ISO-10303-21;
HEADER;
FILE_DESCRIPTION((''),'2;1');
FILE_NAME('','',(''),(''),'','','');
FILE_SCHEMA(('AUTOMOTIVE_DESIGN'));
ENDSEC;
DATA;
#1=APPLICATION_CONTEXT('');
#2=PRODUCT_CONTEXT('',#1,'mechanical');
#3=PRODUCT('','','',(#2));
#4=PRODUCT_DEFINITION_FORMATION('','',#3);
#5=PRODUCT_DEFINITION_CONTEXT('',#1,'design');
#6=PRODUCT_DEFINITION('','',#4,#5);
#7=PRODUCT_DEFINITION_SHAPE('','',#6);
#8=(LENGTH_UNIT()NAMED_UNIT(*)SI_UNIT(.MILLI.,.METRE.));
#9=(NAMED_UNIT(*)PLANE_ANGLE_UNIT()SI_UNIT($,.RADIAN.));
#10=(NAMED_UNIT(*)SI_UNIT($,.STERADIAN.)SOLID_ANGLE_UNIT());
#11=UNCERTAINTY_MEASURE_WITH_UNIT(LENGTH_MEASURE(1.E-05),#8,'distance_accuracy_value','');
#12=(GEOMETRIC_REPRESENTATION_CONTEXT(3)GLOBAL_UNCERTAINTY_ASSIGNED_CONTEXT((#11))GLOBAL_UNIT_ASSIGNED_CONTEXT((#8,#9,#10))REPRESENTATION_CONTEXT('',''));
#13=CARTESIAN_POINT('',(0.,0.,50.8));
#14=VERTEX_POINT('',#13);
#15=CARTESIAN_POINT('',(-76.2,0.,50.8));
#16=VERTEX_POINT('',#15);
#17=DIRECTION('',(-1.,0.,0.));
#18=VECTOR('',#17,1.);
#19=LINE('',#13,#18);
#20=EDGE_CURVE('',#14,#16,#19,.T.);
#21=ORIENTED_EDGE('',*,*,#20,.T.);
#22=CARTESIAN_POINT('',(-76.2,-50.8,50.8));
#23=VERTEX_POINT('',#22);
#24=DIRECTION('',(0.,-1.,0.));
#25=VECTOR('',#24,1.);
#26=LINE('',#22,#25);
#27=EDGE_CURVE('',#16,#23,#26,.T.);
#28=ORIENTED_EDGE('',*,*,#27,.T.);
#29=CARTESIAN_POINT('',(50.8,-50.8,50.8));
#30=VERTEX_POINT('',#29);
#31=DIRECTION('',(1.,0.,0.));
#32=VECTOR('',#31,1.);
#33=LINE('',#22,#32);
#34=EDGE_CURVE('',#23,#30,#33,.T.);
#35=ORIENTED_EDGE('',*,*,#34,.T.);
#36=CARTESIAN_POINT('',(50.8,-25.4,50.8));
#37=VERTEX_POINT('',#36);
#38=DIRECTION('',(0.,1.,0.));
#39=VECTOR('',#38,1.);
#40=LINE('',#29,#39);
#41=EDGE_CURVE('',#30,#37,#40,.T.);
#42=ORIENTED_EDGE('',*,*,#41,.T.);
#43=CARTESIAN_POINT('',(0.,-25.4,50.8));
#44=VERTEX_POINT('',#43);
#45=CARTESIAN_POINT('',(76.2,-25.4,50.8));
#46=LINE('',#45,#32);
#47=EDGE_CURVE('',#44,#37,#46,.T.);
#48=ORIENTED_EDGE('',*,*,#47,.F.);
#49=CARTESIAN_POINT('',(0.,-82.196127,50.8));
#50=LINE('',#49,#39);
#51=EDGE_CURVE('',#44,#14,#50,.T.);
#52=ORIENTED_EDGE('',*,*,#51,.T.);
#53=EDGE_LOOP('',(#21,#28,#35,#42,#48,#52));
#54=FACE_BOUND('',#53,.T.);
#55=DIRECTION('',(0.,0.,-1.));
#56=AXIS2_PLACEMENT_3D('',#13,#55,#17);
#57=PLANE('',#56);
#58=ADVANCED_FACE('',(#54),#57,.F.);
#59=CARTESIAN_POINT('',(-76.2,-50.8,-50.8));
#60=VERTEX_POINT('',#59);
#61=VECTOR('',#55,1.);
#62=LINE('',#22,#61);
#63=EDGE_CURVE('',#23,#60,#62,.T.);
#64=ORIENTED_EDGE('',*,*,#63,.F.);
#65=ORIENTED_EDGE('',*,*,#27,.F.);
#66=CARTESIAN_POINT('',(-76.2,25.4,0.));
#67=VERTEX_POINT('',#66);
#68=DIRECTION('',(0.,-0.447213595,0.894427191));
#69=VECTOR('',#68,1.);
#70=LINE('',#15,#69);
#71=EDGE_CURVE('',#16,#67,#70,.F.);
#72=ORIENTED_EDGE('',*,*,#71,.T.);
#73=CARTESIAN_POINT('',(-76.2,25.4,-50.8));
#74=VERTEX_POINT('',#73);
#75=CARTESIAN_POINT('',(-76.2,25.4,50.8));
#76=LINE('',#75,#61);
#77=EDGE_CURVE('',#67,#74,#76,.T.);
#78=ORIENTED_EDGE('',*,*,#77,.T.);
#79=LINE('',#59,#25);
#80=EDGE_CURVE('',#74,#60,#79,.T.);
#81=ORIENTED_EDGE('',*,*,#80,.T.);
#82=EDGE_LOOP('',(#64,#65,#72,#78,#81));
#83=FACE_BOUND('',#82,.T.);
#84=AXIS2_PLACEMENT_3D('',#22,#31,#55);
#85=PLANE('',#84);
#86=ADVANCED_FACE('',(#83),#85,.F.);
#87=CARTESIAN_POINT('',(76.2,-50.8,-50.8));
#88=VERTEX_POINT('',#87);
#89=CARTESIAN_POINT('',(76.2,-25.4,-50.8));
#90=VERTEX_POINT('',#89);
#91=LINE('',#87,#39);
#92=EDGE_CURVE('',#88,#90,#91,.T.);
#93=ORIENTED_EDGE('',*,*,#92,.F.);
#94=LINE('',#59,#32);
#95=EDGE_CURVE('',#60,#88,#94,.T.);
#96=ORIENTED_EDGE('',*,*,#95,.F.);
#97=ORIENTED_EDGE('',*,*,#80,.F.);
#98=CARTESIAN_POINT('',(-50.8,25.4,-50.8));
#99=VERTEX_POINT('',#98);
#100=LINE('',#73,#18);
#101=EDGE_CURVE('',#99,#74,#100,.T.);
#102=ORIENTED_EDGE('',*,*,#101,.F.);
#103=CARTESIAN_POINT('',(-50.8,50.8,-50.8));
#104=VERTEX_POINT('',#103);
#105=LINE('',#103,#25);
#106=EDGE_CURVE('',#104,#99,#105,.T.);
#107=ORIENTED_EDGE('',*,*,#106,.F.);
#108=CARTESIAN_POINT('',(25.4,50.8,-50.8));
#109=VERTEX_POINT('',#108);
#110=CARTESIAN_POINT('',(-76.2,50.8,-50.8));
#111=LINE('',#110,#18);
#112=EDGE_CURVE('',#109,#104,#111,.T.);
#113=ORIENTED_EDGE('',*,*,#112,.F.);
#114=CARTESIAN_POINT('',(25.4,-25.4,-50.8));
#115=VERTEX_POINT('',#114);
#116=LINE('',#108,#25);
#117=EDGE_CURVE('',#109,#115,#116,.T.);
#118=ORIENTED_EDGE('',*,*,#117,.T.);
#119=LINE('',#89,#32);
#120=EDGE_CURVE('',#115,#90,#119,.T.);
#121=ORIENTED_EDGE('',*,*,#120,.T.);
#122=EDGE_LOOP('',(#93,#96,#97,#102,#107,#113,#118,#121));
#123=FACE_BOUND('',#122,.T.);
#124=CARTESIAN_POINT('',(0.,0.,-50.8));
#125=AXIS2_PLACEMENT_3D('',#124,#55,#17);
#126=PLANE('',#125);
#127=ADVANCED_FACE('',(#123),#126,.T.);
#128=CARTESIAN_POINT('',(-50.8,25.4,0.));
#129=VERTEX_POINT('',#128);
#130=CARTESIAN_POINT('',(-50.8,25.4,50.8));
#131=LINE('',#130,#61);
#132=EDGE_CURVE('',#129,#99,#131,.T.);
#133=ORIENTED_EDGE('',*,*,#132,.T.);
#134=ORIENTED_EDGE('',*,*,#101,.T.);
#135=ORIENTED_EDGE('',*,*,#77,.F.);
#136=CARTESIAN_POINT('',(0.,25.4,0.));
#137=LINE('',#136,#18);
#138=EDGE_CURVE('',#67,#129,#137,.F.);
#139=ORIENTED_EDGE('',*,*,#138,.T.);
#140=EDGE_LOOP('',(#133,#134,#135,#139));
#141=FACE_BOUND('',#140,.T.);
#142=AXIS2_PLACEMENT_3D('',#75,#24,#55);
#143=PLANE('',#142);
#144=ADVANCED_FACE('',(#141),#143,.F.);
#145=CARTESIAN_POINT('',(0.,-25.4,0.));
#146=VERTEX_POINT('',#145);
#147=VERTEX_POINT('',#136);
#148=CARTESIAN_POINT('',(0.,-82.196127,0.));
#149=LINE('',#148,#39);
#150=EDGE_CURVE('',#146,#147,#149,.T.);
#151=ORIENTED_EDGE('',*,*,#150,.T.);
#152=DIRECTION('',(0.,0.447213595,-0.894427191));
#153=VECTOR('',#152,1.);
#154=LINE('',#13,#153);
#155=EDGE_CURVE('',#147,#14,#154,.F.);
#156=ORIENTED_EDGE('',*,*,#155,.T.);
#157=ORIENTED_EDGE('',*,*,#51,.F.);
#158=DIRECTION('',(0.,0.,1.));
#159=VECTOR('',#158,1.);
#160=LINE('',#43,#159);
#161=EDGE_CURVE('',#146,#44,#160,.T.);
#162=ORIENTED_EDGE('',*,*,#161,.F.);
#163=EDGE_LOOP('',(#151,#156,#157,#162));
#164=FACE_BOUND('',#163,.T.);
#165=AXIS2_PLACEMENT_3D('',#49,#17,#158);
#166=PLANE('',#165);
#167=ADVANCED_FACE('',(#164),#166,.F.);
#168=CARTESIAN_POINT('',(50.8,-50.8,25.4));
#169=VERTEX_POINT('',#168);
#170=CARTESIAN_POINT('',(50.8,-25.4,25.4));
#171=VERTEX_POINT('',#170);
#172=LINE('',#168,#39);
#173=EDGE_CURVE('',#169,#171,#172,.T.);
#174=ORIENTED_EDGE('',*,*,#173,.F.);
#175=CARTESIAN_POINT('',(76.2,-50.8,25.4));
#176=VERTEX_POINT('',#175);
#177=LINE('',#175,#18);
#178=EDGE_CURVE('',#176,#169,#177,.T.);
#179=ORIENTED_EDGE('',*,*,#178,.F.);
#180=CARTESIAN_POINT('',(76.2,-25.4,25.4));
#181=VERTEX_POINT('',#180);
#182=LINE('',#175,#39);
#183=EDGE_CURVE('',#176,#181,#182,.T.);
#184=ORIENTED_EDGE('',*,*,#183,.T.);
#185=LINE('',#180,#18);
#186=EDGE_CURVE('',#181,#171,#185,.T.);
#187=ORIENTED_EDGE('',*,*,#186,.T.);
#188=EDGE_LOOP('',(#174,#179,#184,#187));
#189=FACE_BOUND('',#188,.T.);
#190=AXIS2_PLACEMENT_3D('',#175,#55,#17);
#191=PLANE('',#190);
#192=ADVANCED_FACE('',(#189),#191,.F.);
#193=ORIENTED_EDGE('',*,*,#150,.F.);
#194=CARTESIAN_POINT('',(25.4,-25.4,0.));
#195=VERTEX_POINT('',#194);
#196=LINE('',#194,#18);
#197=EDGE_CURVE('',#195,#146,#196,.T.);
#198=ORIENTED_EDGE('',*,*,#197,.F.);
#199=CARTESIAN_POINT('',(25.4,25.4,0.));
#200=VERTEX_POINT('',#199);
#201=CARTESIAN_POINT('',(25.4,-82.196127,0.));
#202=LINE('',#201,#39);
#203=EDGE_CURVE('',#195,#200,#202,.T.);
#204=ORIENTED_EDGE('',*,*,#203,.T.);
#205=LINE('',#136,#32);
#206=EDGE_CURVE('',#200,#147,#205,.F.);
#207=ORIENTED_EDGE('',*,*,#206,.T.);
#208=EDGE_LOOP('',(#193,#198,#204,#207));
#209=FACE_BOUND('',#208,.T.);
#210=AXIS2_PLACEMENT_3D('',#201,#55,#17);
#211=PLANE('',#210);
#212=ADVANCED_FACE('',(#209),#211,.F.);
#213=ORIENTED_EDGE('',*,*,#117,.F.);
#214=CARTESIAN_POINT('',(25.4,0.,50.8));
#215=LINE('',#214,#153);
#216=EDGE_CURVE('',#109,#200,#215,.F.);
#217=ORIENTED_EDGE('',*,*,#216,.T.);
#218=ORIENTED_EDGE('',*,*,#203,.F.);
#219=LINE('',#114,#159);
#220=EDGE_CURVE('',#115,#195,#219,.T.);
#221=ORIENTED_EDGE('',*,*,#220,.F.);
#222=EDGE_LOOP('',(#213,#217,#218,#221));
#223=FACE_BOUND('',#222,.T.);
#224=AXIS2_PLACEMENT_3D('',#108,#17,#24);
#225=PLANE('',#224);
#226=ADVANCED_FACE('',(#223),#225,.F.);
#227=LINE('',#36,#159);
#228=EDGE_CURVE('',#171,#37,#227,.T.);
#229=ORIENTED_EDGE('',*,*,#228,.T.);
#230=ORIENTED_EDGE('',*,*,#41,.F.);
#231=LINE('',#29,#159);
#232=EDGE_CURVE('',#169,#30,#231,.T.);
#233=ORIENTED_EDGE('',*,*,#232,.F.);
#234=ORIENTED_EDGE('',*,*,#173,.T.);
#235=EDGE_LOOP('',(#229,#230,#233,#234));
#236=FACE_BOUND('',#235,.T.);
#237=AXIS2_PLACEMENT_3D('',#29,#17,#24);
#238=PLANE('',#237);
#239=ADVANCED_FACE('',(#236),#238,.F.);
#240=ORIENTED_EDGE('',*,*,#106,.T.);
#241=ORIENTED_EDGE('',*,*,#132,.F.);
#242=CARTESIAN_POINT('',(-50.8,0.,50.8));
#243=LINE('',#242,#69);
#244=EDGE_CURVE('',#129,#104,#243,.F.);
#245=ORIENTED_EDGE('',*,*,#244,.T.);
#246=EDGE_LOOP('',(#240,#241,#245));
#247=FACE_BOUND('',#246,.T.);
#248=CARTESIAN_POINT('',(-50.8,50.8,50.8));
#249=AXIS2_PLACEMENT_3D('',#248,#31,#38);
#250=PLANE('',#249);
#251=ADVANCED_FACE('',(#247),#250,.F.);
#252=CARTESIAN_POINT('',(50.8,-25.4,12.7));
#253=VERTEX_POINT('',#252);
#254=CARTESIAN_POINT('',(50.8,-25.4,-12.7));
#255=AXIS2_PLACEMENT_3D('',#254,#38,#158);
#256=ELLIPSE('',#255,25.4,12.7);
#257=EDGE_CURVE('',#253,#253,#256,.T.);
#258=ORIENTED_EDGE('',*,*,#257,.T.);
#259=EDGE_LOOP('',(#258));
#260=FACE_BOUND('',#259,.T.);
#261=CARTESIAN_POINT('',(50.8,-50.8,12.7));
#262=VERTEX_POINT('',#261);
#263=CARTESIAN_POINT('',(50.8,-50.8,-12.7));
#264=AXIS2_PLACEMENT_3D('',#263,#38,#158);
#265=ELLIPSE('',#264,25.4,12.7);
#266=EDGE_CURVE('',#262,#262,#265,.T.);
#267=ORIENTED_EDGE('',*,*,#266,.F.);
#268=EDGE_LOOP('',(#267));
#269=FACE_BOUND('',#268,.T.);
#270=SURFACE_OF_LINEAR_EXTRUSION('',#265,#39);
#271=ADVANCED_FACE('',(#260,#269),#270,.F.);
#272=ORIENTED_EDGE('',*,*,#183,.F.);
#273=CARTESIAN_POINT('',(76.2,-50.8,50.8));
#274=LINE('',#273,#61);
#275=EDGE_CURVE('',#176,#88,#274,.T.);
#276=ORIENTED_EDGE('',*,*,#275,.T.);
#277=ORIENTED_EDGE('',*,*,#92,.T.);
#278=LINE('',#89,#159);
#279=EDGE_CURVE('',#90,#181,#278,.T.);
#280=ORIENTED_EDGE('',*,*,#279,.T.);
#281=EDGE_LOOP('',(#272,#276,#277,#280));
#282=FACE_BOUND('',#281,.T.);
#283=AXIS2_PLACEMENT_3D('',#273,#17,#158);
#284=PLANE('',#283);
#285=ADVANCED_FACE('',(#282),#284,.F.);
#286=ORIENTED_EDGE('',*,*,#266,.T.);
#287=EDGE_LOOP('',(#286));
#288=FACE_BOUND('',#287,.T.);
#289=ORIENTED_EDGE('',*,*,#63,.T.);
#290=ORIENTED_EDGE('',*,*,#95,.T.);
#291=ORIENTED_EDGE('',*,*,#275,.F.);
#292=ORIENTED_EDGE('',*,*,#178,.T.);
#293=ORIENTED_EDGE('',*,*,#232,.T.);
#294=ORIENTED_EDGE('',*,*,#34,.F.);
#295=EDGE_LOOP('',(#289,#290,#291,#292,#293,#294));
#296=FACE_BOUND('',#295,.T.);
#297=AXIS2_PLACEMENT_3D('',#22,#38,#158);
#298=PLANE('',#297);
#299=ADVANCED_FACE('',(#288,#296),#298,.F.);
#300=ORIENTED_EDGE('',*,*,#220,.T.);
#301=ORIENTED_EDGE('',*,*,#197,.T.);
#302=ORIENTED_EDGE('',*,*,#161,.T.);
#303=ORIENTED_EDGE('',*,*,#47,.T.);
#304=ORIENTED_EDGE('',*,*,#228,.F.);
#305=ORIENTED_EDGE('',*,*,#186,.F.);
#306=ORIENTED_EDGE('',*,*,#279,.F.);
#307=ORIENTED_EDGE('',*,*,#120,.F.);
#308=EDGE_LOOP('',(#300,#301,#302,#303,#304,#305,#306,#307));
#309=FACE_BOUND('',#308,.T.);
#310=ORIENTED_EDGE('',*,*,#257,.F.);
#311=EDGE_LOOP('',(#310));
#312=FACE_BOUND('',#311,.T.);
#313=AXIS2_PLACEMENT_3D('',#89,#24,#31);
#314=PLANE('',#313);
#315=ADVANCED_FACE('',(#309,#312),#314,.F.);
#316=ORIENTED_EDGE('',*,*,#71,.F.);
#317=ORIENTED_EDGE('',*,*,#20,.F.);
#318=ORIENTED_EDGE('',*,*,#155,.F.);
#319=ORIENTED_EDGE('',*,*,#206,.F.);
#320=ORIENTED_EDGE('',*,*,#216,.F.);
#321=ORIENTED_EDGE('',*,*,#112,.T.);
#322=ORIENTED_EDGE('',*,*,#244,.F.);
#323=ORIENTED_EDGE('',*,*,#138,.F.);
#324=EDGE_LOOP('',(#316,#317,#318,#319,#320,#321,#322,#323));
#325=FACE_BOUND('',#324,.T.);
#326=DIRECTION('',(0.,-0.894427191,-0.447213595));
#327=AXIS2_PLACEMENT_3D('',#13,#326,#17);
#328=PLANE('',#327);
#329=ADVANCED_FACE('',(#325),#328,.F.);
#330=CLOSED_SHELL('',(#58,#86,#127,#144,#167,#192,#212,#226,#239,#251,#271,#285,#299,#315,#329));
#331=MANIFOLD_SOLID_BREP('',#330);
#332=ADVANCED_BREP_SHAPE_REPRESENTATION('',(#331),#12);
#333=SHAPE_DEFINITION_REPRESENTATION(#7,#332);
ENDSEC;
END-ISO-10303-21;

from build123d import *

# Parameters (mm, degrees)
SKETCH2_W           = 152.4
SKETCH2_H           = 101.6
BOSS_EXTRUDE1_DEPTH = 50.8
SKETCH3_W           = 50.8
SKETCH3_H           = 76.2
CUT_EXTRUDE1_DEPTH  = 137.783186101
SKETCH4_W           = 25.4
SKETCH4_H           = 25.4
CUT_EXTRUDE2_DEPTH  = 120.1365603
SKETCH5_W           = 25.4
SKETCH5_H           = 50.8
CUT_EXTRUDE3_DEPTH  = 76.2
SKETCH6_W           = 25.4
SKETCH6_H           = 25.4
CUT_EXTRUDE4_DEPTH  = 137.783186101
CHAMFER1_SIZE2      = 101.6
CHAMFER1_SIZE       = 50.8
SKETCH7_RX          = 25.4
SKETCH7_RY          = 12.7
CUT_EXTRUDE5_DEPTH  = 120.1365603


with BuildPart() as part:
    # Sketch2 → Boss-Extrude1 (new, symmetric)
    with BuildSketch(Plane.XY):
        Rectangle(SKETCH2_W, SKETCH2_H)
    extrude(amount=BOSS_EXTRUDE1_DEPTH, both=True)

    # Sketch3 → Cut-Extrude1 (cut, through all)
    with BuildSketch(Plane.XY.offset(50.8)):
        with Locations((50.8, 12.7)):
            Rectangle(SKETCH3_W, SKETCH3_H)
    extrude(amount=-CUT_EXTRUDE1_DEPTH, mode=Mode.SUBTRACT)

    # Sketch4 → Cut-Extrude2 (cut, through all)
    with BuildSketch(Plane(origin=(0, -25.4, 0), x_dir=(1, 0, 0), z_dir=(0, 1, 0))):
        with Locations((63.5, -38.1)):
            Rectangle(SKETCH4_W, SKETCH4_H)
    extrude(amount=-CUT_EXTRUDE2_DEPTH, mode=Mode.SUBTRACT)

    # Sketch5 → Cut-Extrude3 (cut)
    with BuildSketch(Plane(origin=(0, 50.8, 0), x_dir=(1, 0, 0), z_dir=(0, 1, 0))):
        with Locations((12.7, -25.4)):
            Rectangle(SKETCH5_W, SKETCH5_H)
    extrude(amount=-CUT_EXTRUDE3_DEPTH, mode=Mode.SUBTRACT)

    # Sketch6 → Cut-Extrude4 (cut, through all)
    with BuildSketch(Plane(origin=(0, 0, -50.8), x_dir=(-1, 0, 0), z_dir=(0, 0, -1))):
        with Locations((63.5, 38.1)):
            Rectangle(SKETCH6_W, SKETCH6_H)
    extrude(amount=-CUT_EXTRUDE4_DEPTH, mode=Mode.SUBTRACT)

    # Chamfer1
    chamfer1_edges = [part.edges().sort_by_distance(p)[0] for p in [
        (-25.4, 50.8, 50.8),
    ]]
    chamfer1_side = [part.faces().sort_by_distance(p)[0] for p in [
        (-25.4, 49.784, 50.8),
    ]]
    chamfer(chamfer1_edges, length=CHAMFER1_SIZE - 0.0001, length2=CHAMFER1_SIZE2 - 0.0001, reference=chamfer1_side[0])  # a hair under: the kernel refuses the full size

    # Sketch7 → Cut-Extrude5 (cut, through all)
    with BuildSketch(Plane(origin=(0, -25.4, 0), x_dir=(1, 0, 0), z_dir=(0, 1, 0))):
        with Locations(Location((50.8, 12.7), (0, 0, -90))):
            Ellipse(SKETCH7_RX, SKETCH7_RY)
    extrude(amount=-CUT_EXTRUDE5_DEPTH, mode=Mode.SUBTRACT)


solid = part.part
